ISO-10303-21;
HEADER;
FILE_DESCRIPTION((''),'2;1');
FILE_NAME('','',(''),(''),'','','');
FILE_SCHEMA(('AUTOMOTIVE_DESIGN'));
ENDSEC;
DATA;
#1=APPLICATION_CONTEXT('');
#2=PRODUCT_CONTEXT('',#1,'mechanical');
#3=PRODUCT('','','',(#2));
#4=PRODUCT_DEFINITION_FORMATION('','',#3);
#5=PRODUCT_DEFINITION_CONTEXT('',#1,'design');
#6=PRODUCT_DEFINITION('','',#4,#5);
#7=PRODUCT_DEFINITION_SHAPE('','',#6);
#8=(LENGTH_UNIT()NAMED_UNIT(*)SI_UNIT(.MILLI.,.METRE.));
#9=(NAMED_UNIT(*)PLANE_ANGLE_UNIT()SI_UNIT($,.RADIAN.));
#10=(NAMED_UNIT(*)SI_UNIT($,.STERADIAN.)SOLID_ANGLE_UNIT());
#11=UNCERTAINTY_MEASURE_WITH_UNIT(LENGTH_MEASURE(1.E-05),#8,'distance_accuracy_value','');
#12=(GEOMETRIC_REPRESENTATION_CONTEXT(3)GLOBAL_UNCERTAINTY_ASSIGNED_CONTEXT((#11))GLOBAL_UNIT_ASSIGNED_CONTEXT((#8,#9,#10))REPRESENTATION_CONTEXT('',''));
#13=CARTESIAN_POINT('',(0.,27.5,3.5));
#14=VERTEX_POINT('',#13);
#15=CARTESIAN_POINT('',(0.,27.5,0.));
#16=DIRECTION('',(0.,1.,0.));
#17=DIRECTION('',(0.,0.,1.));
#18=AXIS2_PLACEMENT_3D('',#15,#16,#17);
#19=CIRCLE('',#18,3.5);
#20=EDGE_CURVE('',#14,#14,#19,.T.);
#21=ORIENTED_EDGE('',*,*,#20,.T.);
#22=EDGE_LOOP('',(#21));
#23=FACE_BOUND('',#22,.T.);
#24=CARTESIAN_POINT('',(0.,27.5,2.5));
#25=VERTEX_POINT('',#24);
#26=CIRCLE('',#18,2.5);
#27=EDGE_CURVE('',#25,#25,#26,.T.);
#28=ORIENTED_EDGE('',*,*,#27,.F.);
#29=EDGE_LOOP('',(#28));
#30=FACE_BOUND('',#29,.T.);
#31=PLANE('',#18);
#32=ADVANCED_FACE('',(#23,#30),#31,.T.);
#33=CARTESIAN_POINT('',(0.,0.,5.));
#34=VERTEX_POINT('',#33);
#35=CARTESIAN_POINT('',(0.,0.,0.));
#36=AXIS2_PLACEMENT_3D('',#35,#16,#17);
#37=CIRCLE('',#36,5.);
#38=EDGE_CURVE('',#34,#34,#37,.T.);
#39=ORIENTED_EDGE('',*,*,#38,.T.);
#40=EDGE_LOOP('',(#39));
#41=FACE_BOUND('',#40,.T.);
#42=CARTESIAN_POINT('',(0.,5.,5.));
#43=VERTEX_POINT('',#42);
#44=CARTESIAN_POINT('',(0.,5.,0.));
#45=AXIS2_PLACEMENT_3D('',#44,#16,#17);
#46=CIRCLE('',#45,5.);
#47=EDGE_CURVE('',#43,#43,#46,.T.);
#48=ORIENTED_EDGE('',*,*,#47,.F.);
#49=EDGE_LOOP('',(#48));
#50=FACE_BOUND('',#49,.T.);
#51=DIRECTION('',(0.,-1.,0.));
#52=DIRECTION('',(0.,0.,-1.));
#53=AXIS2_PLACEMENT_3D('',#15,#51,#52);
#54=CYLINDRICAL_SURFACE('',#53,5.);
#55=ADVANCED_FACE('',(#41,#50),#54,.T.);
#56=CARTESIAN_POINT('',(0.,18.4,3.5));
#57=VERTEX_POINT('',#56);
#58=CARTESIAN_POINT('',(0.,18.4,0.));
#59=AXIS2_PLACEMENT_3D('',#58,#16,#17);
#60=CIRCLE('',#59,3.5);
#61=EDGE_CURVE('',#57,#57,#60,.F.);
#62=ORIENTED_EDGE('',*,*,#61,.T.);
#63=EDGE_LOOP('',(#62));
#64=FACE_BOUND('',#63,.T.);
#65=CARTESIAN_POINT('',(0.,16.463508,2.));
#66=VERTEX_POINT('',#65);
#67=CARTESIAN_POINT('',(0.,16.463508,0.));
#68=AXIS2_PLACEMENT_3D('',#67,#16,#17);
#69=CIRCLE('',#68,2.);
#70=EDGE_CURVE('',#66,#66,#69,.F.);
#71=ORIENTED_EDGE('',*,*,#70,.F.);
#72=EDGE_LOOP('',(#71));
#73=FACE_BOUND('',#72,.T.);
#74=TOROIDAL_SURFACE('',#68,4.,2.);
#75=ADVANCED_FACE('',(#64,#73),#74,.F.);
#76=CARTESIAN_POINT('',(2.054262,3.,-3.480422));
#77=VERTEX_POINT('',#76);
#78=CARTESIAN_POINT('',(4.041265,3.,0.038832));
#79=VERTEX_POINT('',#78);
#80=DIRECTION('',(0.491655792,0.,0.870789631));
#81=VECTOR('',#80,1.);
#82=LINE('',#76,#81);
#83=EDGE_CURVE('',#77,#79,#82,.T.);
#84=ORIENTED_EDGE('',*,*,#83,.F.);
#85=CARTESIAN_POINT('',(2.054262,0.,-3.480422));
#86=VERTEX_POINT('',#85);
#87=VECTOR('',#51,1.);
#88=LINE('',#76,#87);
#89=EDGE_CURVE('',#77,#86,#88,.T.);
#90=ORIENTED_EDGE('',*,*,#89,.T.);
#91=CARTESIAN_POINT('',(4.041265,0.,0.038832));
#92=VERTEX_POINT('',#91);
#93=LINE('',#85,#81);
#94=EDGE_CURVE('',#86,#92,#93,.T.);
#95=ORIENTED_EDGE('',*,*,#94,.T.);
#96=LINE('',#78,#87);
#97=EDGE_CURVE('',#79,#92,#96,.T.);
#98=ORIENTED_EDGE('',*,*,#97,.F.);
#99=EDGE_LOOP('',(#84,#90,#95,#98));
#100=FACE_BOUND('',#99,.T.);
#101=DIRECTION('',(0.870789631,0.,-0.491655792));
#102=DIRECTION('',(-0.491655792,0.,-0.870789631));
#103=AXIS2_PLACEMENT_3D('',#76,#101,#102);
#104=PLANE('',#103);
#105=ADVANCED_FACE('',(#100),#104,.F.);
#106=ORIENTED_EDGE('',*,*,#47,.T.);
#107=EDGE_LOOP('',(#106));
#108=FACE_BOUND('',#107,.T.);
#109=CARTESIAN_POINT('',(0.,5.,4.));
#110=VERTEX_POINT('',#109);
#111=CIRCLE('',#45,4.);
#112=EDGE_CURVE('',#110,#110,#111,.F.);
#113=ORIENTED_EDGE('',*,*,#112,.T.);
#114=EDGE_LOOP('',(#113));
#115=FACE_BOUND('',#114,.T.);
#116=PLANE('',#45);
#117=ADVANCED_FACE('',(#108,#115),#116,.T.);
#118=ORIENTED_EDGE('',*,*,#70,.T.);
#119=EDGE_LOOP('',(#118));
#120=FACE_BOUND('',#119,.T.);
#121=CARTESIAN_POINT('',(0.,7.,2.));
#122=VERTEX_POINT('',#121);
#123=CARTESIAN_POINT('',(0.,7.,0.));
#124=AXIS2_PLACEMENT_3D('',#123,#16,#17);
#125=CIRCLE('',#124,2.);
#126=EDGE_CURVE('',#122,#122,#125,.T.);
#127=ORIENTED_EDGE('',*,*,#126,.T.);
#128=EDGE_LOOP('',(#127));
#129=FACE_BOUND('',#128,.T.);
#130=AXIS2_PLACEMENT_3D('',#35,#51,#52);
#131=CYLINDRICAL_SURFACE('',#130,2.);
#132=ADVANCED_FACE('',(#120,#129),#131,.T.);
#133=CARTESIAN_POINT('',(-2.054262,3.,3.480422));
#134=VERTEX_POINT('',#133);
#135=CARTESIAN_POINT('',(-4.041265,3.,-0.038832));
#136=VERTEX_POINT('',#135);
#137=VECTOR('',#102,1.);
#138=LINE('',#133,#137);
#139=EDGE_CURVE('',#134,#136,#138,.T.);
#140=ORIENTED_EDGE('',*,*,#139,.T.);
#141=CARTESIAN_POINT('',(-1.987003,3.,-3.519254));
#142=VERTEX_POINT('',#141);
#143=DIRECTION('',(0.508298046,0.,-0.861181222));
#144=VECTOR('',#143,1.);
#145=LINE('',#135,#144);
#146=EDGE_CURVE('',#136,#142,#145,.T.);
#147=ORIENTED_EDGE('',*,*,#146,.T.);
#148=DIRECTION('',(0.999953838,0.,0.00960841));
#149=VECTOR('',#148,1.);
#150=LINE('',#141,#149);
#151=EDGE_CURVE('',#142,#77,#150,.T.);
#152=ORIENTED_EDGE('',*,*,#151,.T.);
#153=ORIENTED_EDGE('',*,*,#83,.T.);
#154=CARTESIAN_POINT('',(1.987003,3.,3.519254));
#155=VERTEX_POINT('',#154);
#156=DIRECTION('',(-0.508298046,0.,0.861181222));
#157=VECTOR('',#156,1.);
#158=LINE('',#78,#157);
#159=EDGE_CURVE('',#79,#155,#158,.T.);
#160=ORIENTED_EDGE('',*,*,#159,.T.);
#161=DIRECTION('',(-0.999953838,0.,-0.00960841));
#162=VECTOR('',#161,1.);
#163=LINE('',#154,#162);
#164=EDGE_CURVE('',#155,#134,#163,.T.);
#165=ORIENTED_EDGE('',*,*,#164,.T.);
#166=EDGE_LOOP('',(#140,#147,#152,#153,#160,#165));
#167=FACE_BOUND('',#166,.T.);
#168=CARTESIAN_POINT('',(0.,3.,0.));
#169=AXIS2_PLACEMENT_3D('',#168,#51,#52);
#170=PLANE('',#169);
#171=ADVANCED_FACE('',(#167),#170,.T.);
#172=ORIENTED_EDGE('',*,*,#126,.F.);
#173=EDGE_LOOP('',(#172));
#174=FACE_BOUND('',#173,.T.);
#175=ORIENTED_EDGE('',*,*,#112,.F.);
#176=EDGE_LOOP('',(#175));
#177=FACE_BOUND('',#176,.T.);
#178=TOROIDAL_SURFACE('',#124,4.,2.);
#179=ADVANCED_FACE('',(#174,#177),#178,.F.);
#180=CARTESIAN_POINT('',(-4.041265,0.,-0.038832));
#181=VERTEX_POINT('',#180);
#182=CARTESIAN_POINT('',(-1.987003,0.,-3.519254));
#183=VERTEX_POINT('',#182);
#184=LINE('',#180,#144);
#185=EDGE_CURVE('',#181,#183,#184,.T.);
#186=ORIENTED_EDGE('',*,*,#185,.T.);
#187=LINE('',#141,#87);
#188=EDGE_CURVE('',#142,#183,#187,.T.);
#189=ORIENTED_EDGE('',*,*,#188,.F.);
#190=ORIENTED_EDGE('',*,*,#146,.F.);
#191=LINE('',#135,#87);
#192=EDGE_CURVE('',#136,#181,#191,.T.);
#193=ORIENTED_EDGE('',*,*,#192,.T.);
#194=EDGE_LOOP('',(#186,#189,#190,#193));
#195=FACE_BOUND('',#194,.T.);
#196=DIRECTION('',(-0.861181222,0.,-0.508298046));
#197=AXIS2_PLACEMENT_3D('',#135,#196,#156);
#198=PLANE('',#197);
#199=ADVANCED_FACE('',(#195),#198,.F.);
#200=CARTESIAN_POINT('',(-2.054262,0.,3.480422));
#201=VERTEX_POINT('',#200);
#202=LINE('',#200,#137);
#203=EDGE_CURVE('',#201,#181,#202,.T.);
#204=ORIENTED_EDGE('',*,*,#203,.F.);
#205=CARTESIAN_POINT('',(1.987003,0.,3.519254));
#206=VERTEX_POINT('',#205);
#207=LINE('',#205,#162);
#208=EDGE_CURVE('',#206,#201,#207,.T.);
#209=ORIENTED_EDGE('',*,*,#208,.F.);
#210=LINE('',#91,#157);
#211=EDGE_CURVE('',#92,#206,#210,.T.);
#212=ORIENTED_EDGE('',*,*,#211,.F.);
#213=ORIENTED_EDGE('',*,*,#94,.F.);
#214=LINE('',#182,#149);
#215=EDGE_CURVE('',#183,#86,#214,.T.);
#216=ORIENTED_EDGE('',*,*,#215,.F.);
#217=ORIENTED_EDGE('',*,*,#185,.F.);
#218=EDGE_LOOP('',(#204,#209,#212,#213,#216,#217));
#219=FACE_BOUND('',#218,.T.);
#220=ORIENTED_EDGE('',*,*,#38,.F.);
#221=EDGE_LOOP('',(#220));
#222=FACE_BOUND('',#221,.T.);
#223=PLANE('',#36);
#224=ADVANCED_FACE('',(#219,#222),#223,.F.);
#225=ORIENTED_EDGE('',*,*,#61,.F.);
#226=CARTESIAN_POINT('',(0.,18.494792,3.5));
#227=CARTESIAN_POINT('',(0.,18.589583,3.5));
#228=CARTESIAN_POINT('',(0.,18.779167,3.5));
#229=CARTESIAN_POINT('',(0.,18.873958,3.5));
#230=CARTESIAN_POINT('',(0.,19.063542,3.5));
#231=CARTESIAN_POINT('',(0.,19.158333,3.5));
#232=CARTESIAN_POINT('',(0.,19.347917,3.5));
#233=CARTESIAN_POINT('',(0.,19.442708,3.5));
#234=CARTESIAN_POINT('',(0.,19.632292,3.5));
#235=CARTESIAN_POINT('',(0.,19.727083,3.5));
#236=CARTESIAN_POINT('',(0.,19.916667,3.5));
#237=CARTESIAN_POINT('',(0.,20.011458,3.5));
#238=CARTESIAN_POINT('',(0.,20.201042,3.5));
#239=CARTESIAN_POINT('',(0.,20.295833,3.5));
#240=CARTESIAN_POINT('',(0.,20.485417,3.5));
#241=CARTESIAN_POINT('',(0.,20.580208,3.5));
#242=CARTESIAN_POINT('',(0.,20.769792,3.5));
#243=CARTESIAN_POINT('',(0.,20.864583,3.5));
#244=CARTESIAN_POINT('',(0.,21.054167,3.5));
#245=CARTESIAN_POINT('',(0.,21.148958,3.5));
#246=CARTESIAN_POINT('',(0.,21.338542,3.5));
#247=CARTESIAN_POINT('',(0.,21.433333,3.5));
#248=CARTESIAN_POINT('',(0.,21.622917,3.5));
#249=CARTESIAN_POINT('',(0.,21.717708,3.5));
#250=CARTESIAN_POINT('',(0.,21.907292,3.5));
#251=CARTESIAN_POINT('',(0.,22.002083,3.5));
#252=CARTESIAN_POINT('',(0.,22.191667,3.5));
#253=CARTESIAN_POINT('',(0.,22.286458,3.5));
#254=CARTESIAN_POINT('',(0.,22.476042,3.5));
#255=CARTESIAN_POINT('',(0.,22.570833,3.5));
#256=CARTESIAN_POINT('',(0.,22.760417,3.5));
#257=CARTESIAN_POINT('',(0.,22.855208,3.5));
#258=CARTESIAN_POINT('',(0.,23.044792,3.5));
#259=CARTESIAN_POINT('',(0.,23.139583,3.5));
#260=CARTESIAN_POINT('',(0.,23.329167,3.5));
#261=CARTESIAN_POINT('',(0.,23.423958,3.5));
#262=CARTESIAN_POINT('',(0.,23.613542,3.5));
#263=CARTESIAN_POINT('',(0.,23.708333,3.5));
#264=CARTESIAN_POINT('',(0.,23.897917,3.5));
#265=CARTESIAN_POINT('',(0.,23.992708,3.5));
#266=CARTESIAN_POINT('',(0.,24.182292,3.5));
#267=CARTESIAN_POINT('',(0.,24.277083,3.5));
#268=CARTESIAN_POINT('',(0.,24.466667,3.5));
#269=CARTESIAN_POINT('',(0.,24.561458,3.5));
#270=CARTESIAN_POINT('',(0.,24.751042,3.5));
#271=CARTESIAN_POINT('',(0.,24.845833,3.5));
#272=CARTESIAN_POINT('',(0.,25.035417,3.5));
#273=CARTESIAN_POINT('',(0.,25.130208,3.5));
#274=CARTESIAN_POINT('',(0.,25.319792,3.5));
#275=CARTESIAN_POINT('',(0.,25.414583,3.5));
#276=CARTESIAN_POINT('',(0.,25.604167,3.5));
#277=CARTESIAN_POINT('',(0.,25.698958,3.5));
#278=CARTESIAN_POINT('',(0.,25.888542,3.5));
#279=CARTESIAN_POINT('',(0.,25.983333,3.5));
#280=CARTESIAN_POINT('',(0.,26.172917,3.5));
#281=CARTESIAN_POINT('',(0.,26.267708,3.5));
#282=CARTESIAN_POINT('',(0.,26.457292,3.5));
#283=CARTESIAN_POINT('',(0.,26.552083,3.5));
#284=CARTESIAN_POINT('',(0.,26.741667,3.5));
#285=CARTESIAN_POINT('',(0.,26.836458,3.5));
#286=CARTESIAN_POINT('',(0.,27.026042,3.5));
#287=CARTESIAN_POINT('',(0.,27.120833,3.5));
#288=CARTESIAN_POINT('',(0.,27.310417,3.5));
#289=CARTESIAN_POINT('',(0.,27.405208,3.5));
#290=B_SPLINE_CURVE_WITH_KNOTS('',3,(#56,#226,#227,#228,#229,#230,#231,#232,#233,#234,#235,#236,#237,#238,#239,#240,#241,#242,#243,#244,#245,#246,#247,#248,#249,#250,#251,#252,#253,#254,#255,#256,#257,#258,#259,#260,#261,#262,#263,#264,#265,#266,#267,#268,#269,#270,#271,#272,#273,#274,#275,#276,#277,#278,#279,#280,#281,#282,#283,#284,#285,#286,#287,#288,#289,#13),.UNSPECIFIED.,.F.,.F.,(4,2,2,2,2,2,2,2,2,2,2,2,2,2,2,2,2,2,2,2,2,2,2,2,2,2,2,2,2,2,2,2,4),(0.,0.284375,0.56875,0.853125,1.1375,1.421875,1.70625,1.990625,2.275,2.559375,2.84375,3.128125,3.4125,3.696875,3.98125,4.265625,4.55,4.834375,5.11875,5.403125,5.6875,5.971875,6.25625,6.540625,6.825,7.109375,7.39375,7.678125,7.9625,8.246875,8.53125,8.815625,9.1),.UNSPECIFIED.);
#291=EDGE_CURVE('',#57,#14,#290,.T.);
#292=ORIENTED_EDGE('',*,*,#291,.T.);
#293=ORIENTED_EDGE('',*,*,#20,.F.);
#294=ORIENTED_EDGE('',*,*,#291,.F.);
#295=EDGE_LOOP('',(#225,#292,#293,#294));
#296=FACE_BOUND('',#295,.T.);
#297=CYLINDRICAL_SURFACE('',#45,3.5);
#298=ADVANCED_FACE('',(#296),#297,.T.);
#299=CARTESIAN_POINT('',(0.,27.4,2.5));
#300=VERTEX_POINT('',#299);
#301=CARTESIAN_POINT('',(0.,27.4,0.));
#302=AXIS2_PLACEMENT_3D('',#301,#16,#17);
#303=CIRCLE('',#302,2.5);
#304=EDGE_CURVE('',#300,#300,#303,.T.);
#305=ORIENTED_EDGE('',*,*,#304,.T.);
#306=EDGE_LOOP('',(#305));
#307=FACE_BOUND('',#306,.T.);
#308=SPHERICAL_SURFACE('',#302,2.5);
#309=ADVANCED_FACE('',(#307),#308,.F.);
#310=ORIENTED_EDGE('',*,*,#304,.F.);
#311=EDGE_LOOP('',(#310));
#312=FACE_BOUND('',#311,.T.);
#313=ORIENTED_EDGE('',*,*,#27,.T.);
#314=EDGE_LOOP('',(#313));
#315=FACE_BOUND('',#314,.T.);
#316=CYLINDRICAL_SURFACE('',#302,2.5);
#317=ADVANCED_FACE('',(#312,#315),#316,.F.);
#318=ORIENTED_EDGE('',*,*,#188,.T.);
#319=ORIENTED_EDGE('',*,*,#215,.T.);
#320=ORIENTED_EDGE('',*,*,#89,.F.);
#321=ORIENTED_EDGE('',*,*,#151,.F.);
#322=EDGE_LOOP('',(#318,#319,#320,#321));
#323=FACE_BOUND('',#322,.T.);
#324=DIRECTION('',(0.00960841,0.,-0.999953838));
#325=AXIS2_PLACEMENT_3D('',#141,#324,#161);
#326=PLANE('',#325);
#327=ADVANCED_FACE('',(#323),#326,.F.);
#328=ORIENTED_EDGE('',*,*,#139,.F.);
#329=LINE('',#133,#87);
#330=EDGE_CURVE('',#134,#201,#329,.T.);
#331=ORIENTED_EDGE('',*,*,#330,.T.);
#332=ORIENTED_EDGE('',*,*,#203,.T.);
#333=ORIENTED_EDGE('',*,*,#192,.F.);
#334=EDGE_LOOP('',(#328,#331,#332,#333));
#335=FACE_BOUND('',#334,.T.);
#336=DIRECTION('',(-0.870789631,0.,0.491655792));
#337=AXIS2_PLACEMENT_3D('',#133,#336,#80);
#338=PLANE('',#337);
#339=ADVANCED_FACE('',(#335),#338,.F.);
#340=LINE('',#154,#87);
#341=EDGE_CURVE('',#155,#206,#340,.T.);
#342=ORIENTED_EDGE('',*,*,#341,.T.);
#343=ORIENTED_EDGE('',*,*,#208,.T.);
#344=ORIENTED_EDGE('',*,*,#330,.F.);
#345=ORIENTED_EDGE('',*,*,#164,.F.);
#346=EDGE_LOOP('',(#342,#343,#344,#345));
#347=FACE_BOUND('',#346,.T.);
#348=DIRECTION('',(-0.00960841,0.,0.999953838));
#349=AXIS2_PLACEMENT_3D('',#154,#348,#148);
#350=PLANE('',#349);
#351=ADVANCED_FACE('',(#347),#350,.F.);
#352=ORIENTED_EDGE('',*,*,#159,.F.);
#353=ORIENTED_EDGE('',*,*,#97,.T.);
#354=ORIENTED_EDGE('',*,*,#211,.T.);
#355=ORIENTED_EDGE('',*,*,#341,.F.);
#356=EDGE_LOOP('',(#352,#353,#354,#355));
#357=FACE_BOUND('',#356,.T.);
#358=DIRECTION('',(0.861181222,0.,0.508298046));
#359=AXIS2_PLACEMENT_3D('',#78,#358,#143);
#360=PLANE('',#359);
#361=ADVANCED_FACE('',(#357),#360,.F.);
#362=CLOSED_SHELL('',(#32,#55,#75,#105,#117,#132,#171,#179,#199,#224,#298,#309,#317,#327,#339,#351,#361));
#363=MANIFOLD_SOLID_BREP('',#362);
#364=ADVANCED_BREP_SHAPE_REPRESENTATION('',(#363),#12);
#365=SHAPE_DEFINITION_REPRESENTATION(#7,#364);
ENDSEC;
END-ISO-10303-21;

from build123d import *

# Parameters (mm, degrees)
SKETCH1_R           = 5
BOSS_EXTRUDE1_DEPTH = 27.5
SKETCH11_R          = 2.5
CUT_EXTRUDE3_DEPTH  = 0.1
DOME2_FACE_RADIUS   = 2.5
DOME2_HEIGHT        = 2.5
CUT_EXTRUDE4_START  = -22.5
SKETCH12_R          = 5
SKETCH12_R_2        = 3.5
CUT_EXTRUDE4_DEPTH  = 22.5
CUT_EXTRUDE5_DEPTH  = 3
SKETCH14_W          = 3
SKETCH14_H          = 13.4
FILLET2_R           = 2
FILLET3_R           = 2


with BuildPart() as part:
    # Sketch1 → Boss-Extrude1 (new body)
    with BuildSketch(Plane(origin=(0, 0, 0), x_dir=(1, 0, 0), z_dir=(0, 1, 0))):
        with Locations(Location((0, 0, 0), (0, 0, 270))):
            Circle(SKETCH1_R)
    extrude(amount=BOSS_EXTRUDE1_DEPTH)

    # Sketch11 → Cut-Extrude3 (cut)
    with BuildSketch(Plane(origin=(0, 27.5, 0), x_dir=(1, 0, 0), z_dir=(0, 1, 0))):
        with Locations(Location((0, 0, 0), (0, 0, 270))):
            Circle(SKETCH11_R)
    extrude(amount=-CUT_EXTRUDE3_DEPTH, mode=Mode.SUBTRACT)

    # Dome2: an elliptical dome of height H over a round flat face of radius A is half a spheroid: the quarter ellipse of half axes A and H revolved about the face's axis
    with BuildSketch(Plane((0, 27.4, 0), x_dir=(0, 0, 1), z_dir=(1, 0, 0)), mode=Mode.PRIVATE) as dome2_quarter:
        Ellipse(DOME2_FACE_RADIUS, DOME2_HEIGHT)
        Rectangle(DOME2_FACE_RADIUS, DOME2_HEIGHT, align=(Align.MIN, Align.MIN), mode=Mode.INTERSECT)
    revolve(dome2_quarter.sketch, axis=Axis((0, 27.4, 0), (0, -1, 0)), mode=Mode.SUBTRACT)

    # Sketch12 → Cut-Extrude4 (cut)
    with BuildSketch(Plane(origin=(0, 27.5, 0), x_dir=(1, 0, 0), z_dir=(0, 1, 0)).offset(CUT_EXTRUDE4_START)):
        with Locations(Location((0, 0, 0), (0, 0, 270))):
            Circle(SKETCH12_R)
        with Locations(Location((0, 0, 0), (0, 0, 270))):
            Circle(SKETCH12_R_2, mode=Mode.SUBTRACT)
    extrude(amount=CUT_EXTRUDE4_DEPTH, mode=Mode.SUBTRACT)

    # Sketch2 → Cut-Extrude5 (cut)
    with BuildSketch(Plane.XZ):
        Polygon((-2.054262095, 3.480422471), (-4.041265323, -0.038831925), (-1.987003228, -3.519254396), (2.054262095, -3.480422471), (4.041265323, 0.038831925), (1.987003228, 3.519254396), align=None)
    extrude(amount=-CUT_EXTRUDE5_DEPTH, mode=Mode.SUBTRACT)

    # Sketch14 → Cut-Revolve1 (revolve, cut)
    with BuildSketch(Plane.XY, mode=Mode.PRIVATE) as cut_revolve1_sk:
        with Locations((3.5, 11.7)):
            Rectangle(SKETCH14_W, SKETCH14_H)
    revolve(cut_revolve1_sk.sketch.rotate(Axis((0, 0, 0), (0, 1, 0)), 270), axis=Axis((0, 0, 0), (0, 1, 0)), mode=Mode.SUBTRACT)

    # Fillet2
    fillet2_edges = [part.edges().sort_by_distance(p)[0] for p in [
        (0, 5, -2),
    ]]
    fillet(fillet2_edges, radius=FILLET2_R)

    # Fillet3
    # the kernel refuses this fillet: 2 mm, written as the material it adds along each edge
    with BuildSketch(Plane(origin=(0, 18.4, 0), x_dir=(0, 0, 1), z_dir=(-1, 0, 0))) as fillet3_piece_1:
        with BuildLine():
            CenterArc((4, -1.936491673), FILLET3_R, 104.477512186, 75.522487814)
            Line((3.5, 0), (3.49, 0.038729833))
            ThreePointArc((3.49, 0.038729833), (2.75, 0.04), (2, 0.04))
            Line((2, 0.04), (1.96, 0))
            Line((1.96, 0), (1.96, -1.936491673))
            Line((1.96, -1.936491673), (2, -1.936491673))
        make_face()
    revolve(axis=Axis((0, 18.4, 0), (0, 1, 0)))


solid = part.part
